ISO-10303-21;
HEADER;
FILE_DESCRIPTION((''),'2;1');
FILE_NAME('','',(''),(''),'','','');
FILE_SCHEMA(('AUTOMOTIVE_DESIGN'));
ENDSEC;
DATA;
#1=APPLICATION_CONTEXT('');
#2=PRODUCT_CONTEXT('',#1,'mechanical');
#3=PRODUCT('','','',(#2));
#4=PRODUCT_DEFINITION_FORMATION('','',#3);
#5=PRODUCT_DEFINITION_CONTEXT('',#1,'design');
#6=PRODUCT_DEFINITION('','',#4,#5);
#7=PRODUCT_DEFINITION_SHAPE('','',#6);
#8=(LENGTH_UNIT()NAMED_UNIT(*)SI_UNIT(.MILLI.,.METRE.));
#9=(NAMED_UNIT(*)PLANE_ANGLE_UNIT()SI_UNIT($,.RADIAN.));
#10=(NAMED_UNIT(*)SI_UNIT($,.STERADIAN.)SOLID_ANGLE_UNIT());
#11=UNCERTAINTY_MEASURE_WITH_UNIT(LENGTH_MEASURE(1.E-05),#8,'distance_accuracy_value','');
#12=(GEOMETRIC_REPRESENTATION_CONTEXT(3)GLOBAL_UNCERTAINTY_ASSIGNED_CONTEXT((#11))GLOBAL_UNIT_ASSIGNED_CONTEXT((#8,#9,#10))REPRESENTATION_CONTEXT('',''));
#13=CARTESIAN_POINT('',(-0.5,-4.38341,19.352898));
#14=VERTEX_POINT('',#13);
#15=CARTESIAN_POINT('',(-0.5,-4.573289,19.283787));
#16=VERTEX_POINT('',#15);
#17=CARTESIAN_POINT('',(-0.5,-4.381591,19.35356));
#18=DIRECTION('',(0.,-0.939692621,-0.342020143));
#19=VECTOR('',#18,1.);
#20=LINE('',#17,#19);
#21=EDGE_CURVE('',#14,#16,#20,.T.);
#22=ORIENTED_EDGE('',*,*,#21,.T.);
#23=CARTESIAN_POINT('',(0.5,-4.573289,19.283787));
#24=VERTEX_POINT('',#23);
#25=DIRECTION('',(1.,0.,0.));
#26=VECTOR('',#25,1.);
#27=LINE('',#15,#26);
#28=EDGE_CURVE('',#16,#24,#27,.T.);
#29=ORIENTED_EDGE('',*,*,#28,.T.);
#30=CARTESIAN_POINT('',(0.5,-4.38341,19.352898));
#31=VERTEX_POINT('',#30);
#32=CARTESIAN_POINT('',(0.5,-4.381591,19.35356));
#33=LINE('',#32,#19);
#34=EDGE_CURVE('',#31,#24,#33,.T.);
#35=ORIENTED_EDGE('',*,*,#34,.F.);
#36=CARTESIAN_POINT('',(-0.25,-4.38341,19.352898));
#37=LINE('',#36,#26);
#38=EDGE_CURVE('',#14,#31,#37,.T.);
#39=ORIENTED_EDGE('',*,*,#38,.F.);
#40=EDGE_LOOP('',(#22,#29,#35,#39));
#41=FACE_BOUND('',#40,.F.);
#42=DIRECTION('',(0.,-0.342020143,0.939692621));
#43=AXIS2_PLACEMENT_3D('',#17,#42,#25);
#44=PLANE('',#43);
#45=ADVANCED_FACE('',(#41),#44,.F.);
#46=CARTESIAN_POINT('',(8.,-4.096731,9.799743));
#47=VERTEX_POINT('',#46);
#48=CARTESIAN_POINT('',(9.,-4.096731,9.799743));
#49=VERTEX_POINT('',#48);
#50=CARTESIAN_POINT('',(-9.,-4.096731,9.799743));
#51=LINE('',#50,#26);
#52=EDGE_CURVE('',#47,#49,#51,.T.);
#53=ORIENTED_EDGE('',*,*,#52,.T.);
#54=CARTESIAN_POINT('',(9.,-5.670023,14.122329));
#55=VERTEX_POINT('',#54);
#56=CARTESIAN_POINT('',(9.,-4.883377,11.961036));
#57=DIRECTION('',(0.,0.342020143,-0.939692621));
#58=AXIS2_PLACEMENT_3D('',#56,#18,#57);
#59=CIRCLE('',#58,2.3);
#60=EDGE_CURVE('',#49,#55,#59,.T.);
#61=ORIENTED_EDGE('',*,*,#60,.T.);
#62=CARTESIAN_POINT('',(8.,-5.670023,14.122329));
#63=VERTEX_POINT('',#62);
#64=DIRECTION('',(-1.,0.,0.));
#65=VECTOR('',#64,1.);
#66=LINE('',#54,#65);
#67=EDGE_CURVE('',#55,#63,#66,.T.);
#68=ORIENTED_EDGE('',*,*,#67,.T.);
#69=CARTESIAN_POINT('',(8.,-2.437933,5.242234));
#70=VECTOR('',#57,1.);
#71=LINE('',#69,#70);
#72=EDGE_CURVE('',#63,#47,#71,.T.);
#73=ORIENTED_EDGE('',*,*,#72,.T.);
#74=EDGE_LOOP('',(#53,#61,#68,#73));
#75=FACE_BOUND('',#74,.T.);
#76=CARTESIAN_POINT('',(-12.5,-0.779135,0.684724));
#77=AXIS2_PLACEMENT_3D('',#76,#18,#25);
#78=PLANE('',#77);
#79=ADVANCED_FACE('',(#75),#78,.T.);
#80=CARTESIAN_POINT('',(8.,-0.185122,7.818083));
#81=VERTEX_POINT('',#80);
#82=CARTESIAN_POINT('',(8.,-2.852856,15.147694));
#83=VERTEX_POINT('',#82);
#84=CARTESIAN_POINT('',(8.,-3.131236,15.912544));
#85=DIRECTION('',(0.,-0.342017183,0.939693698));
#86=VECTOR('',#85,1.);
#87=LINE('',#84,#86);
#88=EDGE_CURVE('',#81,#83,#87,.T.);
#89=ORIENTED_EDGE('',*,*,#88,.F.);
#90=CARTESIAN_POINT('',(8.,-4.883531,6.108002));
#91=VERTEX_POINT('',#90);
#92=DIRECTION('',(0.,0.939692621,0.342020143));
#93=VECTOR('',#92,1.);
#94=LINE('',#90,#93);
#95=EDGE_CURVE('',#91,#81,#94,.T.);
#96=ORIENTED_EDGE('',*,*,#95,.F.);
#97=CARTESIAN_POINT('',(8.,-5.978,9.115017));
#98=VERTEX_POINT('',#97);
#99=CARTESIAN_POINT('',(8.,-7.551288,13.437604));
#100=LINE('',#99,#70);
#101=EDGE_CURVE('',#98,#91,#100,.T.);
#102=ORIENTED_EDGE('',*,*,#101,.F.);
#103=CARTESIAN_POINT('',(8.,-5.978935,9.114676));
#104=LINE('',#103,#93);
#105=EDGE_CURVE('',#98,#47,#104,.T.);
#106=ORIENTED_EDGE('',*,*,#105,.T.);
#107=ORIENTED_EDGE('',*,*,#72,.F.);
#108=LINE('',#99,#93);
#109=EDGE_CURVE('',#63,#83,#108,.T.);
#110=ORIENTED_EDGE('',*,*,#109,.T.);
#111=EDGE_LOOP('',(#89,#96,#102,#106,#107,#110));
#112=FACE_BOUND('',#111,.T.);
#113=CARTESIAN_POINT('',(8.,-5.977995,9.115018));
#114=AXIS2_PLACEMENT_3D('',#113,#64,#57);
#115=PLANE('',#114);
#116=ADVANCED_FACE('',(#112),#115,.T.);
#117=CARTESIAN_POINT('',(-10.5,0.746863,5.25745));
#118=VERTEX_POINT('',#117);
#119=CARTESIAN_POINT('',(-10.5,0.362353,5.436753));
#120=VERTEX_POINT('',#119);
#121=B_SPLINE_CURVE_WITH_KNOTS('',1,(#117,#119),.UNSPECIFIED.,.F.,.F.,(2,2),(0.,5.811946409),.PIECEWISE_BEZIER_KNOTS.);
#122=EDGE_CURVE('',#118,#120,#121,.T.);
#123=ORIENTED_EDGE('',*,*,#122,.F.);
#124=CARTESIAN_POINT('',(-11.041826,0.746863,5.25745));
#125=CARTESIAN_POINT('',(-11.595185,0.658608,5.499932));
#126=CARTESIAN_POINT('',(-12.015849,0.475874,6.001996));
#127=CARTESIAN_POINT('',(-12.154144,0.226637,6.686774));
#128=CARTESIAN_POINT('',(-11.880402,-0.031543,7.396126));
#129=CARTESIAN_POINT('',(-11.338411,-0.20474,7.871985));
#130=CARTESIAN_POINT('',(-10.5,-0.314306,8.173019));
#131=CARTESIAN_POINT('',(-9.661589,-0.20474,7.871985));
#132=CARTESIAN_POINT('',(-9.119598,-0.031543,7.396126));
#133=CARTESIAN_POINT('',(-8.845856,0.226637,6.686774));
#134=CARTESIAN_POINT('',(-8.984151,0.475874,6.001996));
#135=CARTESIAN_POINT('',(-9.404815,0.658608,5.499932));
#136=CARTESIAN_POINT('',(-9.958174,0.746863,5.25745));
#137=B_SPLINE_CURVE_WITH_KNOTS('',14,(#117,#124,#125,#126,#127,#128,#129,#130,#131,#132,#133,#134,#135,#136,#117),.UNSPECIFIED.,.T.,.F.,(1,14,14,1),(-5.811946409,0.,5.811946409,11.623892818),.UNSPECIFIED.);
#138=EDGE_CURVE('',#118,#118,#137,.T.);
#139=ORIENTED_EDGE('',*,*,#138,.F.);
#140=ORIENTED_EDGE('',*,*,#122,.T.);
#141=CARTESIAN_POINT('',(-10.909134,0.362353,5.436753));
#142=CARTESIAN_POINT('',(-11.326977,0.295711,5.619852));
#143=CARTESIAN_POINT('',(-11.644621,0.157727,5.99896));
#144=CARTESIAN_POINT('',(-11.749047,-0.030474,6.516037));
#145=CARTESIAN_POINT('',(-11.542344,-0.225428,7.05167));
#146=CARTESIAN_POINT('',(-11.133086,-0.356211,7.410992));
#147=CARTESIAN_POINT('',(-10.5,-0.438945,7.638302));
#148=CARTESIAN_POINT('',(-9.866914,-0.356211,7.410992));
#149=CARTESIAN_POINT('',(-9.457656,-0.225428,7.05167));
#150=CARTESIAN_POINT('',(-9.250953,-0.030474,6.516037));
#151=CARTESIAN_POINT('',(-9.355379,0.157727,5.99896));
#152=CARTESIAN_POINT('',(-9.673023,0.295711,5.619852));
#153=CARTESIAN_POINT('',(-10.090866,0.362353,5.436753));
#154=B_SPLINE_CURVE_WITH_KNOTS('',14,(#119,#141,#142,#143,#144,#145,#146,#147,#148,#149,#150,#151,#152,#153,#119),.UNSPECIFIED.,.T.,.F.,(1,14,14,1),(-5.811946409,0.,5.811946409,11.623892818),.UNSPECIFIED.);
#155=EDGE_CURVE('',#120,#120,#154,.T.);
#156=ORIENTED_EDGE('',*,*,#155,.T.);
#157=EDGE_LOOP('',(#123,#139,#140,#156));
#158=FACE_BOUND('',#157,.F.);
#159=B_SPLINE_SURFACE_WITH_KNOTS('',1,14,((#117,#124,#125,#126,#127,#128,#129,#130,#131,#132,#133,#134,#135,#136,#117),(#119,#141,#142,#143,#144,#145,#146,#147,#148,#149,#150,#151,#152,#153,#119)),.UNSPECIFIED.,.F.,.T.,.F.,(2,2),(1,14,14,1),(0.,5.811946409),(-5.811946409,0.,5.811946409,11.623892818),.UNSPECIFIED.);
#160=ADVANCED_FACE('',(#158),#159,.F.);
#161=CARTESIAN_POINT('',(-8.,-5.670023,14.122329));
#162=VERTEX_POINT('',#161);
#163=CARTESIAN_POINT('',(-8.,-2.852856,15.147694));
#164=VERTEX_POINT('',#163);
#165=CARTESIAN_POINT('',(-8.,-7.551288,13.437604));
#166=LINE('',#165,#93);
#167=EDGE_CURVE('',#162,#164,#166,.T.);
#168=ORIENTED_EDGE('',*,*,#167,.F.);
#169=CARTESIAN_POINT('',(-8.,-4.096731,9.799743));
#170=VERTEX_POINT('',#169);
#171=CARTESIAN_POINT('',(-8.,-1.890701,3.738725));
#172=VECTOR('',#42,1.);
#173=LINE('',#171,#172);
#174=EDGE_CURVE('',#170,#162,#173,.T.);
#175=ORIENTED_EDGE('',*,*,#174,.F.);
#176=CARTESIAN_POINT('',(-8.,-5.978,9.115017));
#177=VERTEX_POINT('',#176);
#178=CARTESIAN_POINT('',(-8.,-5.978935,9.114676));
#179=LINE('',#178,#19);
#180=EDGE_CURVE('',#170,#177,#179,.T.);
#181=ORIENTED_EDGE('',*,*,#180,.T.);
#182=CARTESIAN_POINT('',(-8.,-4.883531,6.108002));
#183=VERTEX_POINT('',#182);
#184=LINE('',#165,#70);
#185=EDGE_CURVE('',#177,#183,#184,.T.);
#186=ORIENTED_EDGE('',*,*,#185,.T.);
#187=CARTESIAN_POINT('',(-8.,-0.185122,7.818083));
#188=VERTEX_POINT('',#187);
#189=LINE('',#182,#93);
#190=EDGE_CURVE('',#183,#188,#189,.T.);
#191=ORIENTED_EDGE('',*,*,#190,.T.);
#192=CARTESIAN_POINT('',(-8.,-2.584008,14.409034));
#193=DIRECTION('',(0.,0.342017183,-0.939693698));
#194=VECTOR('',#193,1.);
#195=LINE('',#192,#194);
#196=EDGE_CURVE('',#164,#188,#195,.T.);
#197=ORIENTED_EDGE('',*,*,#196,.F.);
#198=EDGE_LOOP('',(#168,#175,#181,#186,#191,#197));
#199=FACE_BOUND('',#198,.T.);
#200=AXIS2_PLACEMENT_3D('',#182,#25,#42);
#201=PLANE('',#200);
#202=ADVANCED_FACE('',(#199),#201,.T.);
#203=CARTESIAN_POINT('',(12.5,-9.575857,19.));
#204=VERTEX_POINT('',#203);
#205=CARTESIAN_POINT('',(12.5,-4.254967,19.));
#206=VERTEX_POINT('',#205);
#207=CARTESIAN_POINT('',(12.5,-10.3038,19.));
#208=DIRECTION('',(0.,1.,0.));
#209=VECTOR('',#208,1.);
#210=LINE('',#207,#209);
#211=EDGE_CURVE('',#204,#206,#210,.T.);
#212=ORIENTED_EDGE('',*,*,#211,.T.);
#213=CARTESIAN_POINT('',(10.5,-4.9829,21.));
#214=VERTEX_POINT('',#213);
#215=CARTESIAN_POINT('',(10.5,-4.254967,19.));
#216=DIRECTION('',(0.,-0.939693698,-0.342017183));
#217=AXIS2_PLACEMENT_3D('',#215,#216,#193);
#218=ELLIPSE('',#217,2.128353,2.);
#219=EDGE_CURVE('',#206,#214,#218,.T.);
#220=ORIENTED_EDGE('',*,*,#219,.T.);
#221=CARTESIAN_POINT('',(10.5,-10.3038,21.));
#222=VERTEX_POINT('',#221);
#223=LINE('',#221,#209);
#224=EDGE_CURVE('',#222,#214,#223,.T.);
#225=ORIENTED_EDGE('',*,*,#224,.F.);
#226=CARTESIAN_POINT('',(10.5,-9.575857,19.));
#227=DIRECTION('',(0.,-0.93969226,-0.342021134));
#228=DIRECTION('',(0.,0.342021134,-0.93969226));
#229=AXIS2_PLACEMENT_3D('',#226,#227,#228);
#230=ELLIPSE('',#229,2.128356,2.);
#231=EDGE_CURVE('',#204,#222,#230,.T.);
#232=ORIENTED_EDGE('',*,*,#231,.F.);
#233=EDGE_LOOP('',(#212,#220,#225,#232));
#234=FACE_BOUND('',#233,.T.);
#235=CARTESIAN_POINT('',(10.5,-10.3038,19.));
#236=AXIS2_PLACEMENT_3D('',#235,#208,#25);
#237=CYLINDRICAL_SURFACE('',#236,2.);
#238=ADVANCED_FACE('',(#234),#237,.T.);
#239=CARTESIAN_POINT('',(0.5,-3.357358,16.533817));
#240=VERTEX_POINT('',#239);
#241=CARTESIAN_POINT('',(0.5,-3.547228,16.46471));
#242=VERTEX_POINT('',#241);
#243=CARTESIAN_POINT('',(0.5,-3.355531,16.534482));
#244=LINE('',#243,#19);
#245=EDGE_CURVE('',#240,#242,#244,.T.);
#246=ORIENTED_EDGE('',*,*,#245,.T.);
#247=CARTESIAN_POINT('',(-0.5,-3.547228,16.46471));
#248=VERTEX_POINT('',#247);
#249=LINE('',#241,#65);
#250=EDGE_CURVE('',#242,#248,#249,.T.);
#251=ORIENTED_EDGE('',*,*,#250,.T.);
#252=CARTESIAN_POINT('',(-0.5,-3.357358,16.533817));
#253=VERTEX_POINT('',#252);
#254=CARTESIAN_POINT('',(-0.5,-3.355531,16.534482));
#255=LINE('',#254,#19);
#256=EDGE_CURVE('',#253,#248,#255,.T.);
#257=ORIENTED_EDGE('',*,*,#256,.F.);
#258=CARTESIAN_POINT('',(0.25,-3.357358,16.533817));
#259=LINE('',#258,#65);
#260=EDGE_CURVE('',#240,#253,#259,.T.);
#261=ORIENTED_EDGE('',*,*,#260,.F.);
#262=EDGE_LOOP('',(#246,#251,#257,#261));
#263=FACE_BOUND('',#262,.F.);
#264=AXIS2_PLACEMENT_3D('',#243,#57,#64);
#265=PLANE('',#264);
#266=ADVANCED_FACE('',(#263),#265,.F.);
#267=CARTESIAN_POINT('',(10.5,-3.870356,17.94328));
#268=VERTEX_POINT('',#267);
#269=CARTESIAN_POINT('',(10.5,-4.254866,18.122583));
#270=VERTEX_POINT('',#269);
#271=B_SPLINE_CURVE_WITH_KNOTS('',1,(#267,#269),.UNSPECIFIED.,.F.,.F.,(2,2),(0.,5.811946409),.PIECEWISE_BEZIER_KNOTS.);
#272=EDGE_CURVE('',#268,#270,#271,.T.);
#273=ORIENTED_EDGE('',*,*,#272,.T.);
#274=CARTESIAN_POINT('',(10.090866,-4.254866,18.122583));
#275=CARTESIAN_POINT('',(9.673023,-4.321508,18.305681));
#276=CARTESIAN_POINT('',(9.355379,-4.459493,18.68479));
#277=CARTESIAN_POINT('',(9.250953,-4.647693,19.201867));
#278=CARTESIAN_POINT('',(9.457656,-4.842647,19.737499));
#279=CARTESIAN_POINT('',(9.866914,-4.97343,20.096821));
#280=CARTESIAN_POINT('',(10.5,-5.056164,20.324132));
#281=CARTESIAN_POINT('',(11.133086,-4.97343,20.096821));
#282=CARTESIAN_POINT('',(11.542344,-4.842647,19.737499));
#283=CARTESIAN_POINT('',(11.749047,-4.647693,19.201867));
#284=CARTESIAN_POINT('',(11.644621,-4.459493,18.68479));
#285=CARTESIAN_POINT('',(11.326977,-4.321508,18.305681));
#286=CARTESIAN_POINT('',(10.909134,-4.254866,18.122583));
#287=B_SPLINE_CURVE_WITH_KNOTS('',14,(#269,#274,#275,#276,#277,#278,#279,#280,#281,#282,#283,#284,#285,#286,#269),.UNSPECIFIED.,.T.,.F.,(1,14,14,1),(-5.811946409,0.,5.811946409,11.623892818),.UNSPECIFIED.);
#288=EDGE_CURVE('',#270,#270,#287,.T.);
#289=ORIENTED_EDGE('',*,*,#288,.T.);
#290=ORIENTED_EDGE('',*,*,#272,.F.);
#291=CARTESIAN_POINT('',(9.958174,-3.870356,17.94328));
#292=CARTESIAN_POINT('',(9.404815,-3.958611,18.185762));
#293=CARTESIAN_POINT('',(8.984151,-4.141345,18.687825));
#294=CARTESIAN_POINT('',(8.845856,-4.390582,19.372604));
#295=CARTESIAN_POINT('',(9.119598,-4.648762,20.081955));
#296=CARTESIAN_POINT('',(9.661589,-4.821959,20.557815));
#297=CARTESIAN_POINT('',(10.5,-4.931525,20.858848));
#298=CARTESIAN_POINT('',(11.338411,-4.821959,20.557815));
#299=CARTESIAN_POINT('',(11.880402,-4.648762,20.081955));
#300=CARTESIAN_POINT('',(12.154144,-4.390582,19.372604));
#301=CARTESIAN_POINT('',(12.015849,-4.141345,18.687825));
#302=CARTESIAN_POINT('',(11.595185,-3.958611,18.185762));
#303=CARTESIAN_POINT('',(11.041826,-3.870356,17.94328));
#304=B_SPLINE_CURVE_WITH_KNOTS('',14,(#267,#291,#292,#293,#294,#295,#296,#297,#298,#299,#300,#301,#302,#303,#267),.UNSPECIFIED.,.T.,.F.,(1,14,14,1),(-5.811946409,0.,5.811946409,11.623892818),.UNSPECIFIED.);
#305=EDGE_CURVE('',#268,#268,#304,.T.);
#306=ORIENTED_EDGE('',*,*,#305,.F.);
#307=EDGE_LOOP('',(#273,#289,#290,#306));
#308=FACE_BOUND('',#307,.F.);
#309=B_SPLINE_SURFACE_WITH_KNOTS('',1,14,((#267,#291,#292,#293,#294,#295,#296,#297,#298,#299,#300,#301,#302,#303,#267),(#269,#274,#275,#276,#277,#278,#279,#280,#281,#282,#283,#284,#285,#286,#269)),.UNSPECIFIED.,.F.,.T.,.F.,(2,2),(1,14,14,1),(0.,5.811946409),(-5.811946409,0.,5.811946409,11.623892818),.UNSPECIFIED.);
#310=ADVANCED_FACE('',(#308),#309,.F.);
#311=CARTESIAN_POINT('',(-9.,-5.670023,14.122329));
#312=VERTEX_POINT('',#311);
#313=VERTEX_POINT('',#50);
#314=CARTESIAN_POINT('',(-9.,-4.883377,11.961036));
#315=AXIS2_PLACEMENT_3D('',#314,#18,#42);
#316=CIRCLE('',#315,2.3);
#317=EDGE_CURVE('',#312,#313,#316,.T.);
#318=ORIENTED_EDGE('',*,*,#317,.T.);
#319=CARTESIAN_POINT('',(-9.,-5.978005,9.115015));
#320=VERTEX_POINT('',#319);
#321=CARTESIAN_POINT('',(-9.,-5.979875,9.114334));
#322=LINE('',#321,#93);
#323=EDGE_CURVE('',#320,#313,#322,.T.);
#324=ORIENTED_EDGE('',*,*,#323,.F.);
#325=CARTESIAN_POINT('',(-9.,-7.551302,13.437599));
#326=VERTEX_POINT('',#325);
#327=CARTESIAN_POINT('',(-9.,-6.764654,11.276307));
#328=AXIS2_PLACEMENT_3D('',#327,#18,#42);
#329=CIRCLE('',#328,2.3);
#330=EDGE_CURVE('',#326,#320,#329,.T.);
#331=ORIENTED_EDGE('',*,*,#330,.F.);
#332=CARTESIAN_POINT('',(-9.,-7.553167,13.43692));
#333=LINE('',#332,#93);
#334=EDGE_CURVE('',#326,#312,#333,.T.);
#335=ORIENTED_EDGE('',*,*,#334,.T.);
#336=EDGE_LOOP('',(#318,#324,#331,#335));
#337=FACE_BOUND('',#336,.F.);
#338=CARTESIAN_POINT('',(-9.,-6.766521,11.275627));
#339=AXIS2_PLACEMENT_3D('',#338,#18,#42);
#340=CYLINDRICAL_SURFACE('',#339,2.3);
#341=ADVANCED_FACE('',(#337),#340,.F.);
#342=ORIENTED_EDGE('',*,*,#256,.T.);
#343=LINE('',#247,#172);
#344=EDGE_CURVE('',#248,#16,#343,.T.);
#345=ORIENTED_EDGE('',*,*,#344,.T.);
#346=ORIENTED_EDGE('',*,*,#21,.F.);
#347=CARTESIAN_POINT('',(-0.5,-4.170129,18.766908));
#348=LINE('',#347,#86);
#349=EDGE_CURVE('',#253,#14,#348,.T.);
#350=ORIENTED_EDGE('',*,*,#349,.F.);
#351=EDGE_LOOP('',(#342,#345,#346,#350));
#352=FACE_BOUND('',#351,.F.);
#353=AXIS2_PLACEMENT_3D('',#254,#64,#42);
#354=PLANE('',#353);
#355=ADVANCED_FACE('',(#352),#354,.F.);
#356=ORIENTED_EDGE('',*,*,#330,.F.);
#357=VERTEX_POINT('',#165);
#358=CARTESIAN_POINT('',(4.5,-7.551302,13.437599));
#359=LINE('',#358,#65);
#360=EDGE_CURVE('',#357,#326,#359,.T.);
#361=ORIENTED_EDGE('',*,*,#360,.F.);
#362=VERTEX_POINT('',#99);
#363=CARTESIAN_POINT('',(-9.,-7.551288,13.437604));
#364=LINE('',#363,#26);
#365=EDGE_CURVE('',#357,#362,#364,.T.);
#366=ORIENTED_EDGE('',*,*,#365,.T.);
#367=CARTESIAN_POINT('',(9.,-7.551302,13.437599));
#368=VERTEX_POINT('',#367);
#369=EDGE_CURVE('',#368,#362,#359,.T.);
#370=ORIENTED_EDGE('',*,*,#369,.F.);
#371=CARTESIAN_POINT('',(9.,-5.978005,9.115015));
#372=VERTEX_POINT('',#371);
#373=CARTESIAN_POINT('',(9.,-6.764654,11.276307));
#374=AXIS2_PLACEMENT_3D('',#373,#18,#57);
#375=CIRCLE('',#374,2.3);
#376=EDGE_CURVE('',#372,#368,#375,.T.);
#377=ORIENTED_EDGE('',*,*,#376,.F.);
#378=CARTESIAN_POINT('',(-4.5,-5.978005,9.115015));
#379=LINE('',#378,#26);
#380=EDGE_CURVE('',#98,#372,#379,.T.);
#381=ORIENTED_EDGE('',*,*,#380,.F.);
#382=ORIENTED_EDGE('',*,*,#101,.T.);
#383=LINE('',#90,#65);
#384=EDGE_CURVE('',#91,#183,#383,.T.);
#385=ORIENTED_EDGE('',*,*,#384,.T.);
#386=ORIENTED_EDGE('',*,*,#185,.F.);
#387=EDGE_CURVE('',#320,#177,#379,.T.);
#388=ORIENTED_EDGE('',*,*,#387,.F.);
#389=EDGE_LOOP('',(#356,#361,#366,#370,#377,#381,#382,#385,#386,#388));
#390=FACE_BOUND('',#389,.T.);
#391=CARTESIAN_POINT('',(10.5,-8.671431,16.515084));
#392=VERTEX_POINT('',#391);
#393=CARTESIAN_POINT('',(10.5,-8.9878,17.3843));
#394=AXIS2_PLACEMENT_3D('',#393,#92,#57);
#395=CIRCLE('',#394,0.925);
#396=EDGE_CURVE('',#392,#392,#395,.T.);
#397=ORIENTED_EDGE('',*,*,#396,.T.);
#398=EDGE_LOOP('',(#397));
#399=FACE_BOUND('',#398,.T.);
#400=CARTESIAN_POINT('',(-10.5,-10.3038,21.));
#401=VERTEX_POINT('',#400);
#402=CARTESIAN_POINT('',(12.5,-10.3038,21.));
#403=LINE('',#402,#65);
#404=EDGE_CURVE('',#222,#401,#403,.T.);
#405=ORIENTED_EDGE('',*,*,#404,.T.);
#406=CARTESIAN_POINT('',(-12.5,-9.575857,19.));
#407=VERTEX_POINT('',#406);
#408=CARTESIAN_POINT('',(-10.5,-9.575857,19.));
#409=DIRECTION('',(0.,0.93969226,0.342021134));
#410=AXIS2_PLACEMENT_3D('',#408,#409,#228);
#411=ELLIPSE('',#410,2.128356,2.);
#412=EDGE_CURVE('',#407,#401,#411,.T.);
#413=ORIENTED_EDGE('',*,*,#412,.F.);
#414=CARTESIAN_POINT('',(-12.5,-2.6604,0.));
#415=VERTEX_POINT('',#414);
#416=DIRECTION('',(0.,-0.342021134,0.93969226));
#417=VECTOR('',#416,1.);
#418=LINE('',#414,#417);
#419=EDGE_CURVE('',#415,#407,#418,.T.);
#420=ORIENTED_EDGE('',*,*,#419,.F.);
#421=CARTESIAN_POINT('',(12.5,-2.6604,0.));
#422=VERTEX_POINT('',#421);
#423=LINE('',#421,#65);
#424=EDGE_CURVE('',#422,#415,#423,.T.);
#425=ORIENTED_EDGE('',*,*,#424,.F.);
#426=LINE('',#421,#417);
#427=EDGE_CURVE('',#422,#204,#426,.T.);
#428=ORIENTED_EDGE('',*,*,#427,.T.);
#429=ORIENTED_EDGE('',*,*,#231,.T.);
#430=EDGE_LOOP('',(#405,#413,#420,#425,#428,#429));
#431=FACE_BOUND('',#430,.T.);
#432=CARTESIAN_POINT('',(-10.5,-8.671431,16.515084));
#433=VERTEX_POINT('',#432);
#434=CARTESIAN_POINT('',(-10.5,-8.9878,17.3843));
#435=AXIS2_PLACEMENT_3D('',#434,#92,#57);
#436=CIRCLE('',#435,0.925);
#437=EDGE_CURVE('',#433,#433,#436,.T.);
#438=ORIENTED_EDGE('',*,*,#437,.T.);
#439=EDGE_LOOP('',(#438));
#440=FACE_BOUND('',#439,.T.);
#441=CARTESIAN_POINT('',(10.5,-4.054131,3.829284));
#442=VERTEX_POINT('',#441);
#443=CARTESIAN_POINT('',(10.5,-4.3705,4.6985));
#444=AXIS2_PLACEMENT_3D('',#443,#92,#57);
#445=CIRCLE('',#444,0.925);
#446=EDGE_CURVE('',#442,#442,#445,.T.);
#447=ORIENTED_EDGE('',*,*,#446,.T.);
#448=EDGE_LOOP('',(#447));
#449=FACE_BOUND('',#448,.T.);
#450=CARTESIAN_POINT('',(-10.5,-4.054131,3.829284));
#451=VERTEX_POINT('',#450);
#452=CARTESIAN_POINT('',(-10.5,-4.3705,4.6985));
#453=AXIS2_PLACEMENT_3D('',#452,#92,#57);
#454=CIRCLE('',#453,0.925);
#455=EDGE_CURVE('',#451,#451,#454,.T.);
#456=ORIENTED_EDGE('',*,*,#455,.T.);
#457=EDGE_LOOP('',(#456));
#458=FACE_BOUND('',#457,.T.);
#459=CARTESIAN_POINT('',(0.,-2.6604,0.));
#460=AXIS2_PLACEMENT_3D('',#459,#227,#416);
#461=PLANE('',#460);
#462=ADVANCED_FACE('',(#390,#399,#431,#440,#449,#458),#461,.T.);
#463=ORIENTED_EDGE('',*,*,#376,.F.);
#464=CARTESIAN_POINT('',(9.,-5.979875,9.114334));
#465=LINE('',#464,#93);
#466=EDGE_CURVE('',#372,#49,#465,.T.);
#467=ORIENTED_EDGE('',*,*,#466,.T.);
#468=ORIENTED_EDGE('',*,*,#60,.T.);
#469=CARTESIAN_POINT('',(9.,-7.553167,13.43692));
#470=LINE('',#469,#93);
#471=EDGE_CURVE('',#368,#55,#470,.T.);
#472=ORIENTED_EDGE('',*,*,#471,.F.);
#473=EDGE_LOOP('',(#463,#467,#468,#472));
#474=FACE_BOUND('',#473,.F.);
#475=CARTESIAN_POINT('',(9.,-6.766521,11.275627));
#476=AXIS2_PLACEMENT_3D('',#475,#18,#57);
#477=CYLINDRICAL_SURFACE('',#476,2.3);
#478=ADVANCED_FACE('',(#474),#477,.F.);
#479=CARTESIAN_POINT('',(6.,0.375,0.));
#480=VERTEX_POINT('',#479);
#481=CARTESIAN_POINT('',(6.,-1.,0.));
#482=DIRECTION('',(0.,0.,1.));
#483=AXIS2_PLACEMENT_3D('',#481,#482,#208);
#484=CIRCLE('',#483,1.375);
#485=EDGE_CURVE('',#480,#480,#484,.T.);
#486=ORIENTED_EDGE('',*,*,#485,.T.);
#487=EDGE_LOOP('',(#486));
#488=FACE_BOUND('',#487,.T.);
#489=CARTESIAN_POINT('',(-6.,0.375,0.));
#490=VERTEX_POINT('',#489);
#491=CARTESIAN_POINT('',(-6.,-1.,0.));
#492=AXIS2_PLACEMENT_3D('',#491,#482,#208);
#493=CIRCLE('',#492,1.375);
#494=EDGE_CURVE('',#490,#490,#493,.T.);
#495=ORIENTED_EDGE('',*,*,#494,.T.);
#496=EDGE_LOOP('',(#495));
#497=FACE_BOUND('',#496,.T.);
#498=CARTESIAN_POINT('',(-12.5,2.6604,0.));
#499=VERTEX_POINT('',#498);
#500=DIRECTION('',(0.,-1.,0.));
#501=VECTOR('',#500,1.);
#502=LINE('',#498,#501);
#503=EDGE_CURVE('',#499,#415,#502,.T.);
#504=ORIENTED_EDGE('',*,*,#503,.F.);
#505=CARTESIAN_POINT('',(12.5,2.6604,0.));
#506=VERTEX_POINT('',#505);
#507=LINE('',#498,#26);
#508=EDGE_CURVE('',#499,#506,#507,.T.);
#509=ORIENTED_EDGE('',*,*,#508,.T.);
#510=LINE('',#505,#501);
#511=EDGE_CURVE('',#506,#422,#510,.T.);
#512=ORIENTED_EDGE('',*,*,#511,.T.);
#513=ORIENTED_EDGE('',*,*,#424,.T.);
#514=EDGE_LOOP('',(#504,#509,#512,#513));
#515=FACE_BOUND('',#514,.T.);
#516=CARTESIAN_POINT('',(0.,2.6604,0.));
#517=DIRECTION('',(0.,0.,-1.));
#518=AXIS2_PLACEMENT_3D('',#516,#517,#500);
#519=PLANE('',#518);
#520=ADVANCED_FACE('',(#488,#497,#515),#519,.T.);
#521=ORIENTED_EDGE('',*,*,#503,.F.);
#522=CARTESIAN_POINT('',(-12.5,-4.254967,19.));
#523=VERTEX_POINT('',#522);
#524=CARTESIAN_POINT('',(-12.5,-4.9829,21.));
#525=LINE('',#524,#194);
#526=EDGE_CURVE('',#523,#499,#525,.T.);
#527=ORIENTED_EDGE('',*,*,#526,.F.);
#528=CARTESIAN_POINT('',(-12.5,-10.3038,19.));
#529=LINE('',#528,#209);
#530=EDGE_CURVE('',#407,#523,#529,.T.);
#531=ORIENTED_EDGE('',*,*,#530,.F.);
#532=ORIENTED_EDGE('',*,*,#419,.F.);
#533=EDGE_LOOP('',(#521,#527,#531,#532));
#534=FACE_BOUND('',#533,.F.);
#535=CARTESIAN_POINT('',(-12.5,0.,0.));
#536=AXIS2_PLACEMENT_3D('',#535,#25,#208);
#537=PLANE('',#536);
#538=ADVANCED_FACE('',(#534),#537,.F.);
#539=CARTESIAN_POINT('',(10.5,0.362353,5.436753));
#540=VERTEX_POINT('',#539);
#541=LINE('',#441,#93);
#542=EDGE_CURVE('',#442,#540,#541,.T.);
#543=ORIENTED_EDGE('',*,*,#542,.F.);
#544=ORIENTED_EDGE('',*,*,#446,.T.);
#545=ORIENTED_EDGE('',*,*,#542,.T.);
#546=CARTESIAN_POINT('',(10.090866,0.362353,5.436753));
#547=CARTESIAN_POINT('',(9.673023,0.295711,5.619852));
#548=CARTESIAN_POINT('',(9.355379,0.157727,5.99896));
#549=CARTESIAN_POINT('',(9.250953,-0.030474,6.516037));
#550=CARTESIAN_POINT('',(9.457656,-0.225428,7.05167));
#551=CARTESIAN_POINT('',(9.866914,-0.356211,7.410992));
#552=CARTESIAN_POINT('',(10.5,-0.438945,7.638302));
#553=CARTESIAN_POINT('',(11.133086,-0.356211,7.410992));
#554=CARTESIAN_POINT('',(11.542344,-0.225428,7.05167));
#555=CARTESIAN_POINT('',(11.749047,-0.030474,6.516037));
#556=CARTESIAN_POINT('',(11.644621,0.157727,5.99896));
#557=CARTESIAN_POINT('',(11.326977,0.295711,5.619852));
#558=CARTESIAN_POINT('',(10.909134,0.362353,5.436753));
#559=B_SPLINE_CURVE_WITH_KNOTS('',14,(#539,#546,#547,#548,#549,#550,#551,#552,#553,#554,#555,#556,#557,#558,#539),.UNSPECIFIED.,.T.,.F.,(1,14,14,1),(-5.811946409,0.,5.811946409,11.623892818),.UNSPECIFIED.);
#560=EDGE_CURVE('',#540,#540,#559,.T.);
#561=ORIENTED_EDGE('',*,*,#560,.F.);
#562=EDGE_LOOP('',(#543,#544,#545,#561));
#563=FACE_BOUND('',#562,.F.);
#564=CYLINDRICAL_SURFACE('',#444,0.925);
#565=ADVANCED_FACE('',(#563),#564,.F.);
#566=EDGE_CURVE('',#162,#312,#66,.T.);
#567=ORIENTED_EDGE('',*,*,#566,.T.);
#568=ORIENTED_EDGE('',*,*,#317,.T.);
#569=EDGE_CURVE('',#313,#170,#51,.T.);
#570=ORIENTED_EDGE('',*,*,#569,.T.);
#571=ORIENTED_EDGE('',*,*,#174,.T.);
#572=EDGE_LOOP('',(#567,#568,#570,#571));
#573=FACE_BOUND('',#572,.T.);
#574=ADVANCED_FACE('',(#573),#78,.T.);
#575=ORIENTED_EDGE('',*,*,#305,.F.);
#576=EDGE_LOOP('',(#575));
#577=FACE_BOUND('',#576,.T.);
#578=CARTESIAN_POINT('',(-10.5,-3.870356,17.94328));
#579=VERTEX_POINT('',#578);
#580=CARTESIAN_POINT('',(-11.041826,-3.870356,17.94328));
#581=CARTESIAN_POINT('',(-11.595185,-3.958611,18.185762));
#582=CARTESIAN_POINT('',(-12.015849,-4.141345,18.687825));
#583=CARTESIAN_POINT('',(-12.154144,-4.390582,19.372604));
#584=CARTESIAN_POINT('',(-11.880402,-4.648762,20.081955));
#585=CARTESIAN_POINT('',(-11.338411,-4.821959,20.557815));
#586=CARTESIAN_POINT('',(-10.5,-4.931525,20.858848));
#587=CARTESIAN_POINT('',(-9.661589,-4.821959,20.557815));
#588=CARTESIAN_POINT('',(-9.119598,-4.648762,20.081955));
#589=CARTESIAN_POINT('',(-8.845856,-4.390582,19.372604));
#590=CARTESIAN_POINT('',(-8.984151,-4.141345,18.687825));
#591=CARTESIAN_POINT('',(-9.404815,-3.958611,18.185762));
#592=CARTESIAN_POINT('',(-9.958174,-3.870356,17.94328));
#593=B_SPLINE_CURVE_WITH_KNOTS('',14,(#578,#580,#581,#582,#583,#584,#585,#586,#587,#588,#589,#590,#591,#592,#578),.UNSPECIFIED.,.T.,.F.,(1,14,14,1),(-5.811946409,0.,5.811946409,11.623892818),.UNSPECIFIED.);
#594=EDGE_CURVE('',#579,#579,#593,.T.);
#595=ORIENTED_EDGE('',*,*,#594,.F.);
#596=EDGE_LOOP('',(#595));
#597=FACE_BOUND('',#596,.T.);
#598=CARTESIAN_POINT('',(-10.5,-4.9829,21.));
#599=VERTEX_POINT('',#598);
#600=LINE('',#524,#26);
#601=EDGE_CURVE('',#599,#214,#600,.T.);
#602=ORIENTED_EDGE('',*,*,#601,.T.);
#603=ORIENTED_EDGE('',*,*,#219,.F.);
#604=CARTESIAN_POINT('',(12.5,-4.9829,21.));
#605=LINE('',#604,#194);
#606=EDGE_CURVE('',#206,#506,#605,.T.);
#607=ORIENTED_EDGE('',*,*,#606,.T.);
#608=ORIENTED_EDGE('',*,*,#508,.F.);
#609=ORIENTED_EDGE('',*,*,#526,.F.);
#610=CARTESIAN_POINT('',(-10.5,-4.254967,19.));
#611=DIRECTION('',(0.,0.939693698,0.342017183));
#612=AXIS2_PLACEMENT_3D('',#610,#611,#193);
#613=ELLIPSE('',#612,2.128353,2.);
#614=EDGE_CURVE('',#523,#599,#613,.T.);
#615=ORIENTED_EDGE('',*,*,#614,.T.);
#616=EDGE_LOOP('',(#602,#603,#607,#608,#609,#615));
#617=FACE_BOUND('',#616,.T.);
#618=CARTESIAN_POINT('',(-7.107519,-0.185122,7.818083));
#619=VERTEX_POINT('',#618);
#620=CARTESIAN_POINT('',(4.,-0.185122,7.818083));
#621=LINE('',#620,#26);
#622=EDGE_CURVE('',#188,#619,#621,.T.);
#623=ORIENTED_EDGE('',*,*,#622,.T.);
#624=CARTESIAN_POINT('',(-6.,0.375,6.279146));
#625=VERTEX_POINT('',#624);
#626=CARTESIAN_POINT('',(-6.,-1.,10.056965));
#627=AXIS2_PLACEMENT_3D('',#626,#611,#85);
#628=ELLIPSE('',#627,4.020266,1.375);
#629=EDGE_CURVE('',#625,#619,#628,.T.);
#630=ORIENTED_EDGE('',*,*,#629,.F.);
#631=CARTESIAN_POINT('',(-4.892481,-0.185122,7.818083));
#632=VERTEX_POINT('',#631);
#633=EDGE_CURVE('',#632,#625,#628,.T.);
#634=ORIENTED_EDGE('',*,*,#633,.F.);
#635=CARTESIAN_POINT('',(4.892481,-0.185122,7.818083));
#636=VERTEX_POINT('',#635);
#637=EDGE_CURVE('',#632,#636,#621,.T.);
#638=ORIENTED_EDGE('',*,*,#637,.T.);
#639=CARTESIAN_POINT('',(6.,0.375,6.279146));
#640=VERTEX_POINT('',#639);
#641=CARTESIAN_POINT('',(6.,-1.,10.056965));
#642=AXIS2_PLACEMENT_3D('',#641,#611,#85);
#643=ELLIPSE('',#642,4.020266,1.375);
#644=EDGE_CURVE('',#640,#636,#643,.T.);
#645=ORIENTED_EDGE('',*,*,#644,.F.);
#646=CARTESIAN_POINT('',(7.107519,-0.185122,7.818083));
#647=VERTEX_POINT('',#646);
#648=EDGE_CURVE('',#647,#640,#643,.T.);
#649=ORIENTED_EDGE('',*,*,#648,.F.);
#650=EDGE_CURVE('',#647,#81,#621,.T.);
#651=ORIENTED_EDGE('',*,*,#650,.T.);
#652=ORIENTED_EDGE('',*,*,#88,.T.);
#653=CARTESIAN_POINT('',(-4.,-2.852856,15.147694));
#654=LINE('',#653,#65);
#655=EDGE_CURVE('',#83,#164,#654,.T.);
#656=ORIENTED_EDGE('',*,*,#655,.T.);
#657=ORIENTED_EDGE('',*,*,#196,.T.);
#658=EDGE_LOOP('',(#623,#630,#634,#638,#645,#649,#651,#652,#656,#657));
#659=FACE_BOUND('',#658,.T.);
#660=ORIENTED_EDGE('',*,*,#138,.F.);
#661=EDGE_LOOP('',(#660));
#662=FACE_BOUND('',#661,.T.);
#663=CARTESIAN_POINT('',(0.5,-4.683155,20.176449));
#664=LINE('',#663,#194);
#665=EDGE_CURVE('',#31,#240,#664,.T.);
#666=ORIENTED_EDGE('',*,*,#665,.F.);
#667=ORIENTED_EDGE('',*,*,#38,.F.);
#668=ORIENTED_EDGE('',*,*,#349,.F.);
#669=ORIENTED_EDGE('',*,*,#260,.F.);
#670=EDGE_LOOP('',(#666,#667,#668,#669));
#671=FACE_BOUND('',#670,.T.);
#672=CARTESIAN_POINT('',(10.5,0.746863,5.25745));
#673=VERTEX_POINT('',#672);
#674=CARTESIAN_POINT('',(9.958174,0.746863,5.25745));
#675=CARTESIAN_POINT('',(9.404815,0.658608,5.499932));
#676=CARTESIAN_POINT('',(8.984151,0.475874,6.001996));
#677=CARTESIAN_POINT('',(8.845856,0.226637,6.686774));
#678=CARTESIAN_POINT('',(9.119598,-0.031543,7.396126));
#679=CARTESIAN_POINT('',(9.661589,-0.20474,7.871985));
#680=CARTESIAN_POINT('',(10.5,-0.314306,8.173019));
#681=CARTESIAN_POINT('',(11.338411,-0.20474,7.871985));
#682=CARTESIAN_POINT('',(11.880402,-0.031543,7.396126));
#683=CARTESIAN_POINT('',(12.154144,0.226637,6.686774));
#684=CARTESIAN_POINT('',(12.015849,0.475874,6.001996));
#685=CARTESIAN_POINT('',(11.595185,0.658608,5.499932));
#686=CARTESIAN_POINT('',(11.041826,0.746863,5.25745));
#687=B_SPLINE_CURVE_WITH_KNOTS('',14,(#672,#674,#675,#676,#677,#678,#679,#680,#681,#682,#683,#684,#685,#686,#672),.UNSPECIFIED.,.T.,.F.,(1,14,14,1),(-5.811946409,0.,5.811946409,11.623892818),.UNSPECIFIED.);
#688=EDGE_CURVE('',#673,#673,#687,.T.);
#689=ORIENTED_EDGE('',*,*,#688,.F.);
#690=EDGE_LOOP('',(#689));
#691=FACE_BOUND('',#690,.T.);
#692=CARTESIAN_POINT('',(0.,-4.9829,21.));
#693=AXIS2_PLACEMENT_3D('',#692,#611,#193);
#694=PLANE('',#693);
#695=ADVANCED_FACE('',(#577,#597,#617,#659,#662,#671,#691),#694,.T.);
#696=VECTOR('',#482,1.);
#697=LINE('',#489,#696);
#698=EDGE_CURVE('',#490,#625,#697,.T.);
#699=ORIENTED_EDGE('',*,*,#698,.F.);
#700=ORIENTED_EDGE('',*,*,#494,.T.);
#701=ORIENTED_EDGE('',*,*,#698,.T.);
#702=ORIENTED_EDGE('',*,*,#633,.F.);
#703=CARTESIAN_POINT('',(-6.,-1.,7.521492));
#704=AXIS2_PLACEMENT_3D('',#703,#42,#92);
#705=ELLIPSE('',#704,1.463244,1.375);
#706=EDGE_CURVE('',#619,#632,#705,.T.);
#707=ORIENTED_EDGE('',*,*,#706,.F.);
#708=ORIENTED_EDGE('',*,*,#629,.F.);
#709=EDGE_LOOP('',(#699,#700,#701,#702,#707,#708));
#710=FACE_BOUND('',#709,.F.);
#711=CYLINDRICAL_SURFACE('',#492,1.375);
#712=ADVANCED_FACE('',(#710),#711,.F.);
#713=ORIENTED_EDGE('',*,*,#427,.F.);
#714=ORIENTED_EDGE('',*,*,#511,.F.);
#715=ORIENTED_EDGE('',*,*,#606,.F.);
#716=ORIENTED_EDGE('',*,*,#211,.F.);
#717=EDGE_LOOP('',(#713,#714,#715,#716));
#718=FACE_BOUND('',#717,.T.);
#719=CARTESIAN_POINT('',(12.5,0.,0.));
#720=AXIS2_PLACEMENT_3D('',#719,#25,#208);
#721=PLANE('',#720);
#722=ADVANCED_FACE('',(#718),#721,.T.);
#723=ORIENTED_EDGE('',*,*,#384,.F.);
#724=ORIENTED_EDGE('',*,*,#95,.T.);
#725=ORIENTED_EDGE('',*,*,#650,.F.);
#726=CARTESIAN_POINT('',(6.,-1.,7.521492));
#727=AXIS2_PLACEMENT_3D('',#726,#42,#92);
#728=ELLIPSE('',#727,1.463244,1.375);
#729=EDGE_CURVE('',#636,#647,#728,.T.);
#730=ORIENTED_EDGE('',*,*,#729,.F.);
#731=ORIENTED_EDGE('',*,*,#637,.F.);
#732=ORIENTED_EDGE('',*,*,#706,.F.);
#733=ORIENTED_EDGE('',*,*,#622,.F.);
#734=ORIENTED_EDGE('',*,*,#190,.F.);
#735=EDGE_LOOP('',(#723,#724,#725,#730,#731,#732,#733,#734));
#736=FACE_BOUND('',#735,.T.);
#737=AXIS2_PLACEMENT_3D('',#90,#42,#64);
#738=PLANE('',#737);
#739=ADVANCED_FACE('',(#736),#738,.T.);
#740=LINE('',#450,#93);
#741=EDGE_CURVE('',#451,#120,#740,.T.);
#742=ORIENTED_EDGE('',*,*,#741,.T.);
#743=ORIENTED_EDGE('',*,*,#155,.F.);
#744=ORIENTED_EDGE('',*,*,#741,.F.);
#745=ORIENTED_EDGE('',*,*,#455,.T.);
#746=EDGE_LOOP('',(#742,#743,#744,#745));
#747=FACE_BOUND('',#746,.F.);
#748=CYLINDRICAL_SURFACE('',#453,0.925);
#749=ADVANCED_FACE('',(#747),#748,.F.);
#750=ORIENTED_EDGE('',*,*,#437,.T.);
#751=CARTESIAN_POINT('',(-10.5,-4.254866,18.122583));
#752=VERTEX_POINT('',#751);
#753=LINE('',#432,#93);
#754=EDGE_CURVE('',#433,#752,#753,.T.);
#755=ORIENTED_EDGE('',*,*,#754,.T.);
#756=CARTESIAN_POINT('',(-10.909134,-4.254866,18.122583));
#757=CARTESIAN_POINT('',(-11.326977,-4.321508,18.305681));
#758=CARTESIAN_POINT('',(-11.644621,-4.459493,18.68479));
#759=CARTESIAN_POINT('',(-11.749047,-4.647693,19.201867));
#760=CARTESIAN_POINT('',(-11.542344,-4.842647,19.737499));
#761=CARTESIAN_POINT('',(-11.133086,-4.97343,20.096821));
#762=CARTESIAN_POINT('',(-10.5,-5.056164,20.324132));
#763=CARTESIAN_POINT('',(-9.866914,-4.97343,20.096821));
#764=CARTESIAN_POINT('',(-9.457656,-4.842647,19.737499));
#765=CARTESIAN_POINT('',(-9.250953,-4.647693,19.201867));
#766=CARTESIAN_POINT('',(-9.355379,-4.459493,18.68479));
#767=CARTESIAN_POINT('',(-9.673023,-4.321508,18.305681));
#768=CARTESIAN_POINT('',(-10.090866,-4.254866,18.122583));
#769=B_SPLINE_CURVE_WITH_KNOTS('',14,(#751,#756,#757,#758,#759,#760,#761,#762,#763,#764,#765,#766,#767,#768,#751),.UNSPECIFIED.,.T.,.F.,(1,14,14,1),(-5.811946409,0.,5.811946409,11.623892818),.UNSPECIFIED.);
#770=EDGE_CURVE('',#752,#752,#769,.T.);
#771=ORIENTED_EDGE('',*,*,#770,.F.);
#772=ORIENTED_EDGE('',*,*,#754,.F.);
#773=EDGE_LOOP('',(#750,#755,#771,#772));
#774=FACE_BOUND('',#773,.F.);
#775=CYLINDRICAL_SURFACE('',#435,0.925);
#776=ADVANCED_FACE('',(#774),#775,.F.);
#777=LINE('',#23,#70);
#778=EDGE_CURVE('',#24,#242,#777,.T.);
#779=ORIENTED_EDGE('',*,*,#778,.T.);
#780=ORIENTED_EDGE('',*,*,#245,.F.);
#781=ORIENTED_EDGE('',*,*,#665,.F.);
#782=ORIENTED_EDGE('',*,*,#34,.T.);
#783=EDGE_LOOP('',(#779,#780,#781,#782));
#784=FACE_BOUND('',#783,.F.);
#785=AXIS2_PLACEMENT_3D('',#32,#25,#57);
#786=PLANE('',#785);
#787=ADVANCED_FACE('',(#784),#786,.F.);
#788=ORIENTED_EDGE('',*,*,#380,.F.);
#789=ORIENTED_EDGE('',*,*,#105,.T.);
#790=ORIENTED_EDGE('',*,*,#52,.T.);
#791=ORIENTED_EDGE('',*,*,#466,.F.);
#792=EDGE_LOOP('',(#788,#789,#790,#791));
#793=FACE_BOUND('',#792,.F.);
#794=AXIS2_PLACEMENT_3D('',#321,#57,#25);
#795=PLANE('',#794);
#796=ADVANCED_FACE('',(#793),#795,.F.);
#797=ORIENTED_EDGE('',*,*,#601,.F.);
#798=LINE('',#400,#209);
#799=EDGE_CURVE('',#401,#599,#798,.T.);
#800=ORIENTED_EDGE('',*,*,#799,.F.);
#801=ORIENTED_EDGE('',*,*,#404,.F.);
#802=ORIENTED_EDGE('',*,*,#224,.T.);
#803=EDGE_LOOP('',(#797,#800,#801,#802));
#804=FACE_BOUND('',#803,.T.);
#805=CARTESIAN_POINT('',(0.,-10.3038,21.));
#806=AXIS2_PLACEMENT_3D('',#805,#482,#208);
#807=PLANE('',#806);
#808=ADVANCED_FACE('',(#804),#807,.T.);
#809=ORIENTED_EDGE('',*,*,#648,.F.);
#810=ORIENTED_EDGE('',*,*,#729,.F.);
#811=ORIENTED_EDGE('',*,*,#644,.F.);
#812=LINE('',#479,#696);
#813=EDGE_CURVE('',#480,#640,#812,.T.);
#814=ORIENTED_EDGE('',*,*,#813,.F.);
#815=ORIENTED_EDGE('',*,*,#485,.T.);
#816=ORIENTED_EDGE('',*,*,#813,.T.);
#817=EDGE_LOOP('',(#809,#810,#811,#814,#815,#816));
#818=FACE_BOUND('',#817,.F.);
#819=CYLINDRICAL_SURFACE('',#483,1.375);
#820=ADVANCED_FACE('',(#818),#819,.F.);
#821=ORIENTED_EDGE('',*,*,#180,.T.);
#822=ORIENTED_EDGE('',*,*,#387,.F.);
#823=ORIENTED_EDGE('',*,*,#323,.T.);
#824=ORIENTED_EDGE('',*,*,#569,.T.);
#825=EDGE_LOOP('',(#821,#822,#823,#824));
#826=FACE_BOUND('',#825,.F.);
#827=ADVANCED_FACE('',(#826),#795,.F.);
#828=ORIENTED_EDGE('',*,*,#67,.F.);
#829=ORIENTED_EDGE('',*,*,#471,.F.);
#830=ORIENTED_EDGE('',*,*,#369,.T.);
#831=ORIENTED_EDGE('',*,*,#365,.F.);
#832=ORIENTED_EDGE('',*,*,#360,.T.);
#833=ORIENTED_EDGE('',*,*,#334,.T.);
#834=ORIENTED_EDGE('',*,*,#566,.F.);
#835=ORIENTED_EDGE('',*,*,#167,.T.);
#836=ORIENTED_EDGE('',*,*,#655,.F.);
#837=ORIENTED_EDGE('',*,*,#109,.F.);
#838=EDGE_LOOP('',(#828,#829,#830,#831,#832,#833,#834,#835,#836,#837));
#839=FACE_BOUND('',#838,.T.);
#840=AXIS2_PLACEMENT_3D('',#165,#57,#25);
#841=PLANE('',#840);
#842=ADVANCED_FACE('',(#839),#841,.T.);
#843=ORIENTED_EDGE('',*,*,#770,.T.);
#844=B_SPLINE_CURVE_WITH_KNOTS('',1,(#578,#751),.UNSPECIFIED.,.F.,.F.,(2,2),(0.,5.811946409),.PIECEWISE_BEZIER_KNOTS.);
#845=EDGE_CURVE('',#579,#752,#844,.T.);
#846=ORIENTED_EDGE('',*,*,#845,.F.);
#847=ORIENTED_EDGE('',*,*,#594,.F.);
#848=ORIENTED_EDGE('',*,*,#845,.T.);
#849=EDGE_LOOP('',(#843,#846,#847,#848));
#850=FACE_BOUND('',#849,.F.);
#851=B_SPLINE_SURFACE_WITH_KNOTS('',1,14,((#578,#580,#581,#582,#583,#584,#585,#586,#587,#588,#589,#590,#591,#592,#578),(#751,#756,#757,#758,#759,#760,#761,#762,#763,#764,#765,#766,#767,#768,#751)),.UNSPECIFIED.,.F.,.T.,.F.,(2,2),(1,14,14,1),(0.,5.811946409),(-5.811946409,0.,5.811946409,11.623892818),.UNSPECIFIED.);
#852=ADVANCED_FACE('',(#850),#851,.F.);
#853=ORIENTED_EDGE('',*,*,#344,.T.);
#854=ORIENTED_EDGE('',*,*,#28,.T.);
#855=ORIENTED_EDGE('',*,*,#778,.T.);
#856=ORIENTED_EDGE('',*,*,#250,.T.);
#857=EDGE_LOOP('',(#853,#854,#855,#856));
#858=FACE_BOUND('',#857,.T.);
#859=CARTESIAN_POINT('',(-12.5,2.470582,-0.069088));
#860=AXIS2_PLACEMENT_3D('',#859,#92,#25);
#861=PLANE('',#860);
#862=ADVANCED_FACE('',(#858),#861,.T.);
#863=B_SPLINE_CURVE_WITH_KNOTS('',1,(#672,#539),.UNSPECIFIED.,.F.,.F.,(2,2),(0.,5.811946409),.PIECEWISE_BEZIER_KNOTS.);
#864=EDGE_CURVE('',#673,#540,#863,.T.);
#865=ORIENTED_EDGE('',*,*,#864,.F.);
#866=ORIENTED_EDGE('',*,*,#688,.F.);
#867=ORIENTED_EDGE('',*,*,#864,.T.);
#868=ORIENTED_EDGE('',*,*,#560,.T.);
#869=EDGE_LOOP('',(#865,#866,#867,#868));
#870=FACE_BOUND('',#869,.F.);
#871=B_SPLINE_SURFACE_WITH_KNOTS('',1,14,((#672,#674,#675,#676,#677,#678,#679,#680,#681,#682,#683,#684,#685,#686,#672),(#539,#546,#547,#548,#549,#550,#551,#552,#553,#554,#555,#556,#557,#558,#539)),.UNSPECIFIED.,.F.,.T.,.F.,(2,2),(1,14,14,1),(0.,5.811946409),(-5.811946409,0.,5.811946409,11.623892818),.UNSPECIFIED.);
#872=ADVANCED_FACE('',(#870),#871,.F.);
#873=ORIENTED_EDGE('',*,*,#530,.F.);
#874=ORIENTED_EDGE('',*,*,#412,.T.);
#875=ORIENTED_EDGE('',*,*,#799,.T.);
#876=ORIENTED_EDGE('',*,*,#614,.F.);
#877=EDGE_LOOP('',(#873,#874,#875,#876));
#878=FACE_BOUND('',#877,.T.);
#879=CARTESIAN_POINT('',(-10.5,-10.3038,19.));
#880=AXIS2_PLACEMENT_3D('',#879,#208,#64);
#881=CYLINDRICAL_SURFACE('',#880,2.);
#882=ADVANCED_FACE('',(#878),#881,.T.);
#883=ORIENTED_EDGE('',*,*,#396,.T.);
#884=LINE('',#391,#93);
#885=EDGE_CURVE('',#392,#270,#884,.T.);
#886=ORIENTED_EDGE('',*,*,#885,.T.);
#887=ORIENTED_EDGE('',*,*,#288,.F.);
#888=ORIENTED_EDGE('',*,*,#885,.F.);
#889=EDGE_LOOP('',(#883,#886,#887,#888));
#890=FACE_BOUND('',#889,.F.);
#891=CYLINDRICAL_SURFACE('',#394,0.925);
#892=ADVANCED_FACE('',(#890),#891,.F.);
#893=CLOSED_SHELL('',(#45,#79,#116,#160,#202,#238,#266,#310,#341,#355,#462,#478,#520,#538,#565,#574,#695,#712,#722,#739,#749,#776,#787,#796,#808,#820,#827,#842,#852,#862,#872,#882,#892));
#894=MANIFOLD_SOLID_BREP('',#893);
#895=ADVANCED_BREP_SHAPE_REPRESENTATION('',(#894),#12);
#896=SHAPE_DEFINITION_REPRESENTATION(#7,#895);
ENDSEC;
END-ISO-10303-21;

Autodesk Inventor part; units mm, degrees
ref_plane "YZ Plane" through (0, 0, 0) normal (1, 0, 0) x (0, 1, 0)
ref_plane "XZ Plane" through (0, 0, 0) normal (0, 1, 0) x (-1, 0, 0)
ref_plane "XY Plane" through (0, 0, 0) normal (0, 0, 1) x (1, 0, 0)
sketch "Skizze1" plane through (0, 0, 0) normal (1, 0, 0) x (0, 1, 0)
  line L0 (2.6604, 0) -> (-2.6604, 0)
  line L1 (-2.6604, 0) -> (-10.3038, 21)
  line L2 (-10.3038, 21) -> (-4.9829, 21)
  line L3 (-4.9829, 21) -> (2.6604, 0)
  point P0 (0, 0)
  point P1 (0, 0)
  dimension "d1" = 21
  dimension "d2" = 70
  dimension "d33" = 5
extrude "Extrusion1" add sketch "Skizze1" along normal mid plane 25
sketch "Skizze3" plane through (-12.5, -2.6604, 0) normal (0, -0.9396926, -0.3420201) x (1, 0, 0)
  line L0 (25, 0) -> (0, 0) projected
  line L1 (25, 22.3477) -> (25, 0) projected
  line L2 (25, 22.3477) -> (0, 22.3477) projected
  line L3 (0, 0) -> (0, 22.3477) projected
  line L4 (3.5, 12) -> (21.5, 12) construction
  line L5 (3.5, 9.7) -> (21.5, 9.7)
  line L6 (21.5, 14.3) -> (3.5, 14.3)
  arc A0 (3.5, 14.3) -> (3.5, 9.7) centre (3.5, 12) ccw
  arc A1 (21.5, 9.7) -> (21.5, 14.3) centre (21.5, 12) ccw
  line L7 (12.5, 22.3477) -> (12.5, 0) construction
  point P0 (12.5, -0.9099)
  point P1 (12.5, 12)
  dimension "d10" = 4.6
  dimension "d11" = 18
  dimension "d12" = 12
extrude "Extrusion3" cut sketch "Skizze3" against normal blind 2 contours A0 L6 A1 L5
sketch "Skizze4" plane through (-12.5, -2.6604, 0) normal (0, -0.9396926, -0.3420201) x (1, 0, 0)
  line L0 (2, 18.5) -> (23, 18.5) construction
  line L1 (23, 18.5) -> (23, 5) construction
  line L2 (23, 5) -> (2, 5) construction
  line L3 (2, 5) -> (2, 18.5) construction
  line L4 (3.5, 14.3) -> (21.5, 14.3) projected
  arc A0 (21.5, 9.7) -> (21.5, 14.3) centre (21.5, 12) ccw projected
  line L5 (21.5, 9.7) -> (3.5, 9.7) projected
  arc A1 (3.5, 14.3) -> (3.5, 9.7) centre (3.5, 12) ccw projected
  line L6 (25, 0) -> (0, 0) projected
  line L7 (25, 22.3477) -> (25, 0) projected
  line L8 (25, 22.3477) -> (0, 22.3477) projected
  line L9 (0, 0) -> (0, 22.3477) projected
  line L10 (25, 22.3477) -> (0, 22.3477) construction
  line L11 (12.5, 22.3477) -> (12.5, 0) construction
  line L12 (25, 0) -> (0, 0) construction
  point P0 (12.5, -0.9099)
  dimension "d15" = 21
  dimension "d16" = 13.5
  dimension "d34" = 7
hole "Bohrung1" at (-10.5, -8.9878, 17.3843) at (10.5, -8.9878, 17.3843) at (10.5, -4.3705, 4.6985) at (-10.5, -4.3705, 4.6985) direction (0, 0.9396926, 0.3420201) diameter 1.85 end through all
sketch "Skizze5" plane through (12.5, 2.6604, 0) normal (0, 0, -1) x (-1, 0, 0)
  line L0 (25, 0) -> (0, 0) projected
  line L1 (0, -5.3209) -> (0, 0) projected
  line L2 (0, -5.3209) -> (25, -5.3209) projected
  line L3 (25, 0) -> (25, -5.3209) projected
  line L4 (0, -5.3209) -> (0, 0) construction
  line L5 (25, 0) -> (25, -5.3209) construction
  line L6 (0, -3.6604) -> (25, -3.6604) construction
  line L7 (25, 0) -> (0, 0) construction
  line L8 (12.5, 0) -> (12.5, -5.3209) construction
  point P0 (12.5, -2.6604)
  point P1 (6.5, -3.6604)
  point P2 (18.5, -3.6604)
  dimension "d25" = 12
  dimension "d43" = 1
hole "Bohrung2" at (6, -1, 0) at (-6, -1, 0) direction (0, 0, 1) diameter 2.75 end through all
sketch "Skizze6" plane through (-12.5, -2.6604, 0) normal (0, -0.9396926, -0.3420201) x (1, 0, 0)
  line L0 (21.5, 9.7) -> (3.5, 9.7) projected
  arc A0 (21.5, 9.7) -> (21.5, 14.3) centre (21.5, 12) ccw projected
  line L1 (3.5, 14.3) -> (21.5, 14.3) projected
  arc A1 (3.5, 14.3) -> (3.5, 9.7) centre (3.5, 12) ccw projected
  line L2 (3.5, 14.3) -> (21.5, 14.3) projected
  line L3 (4.5, 14.3) -> (20.5, 14.3)
  line L4 (20.5, 14.3) -> (20.5, 6.5)
  line L5 (20.5, 6.5) -> (4.5, 6.5)
  line L6 (4.5, 6.5) -> (4.5, 14.3)
  line L7 (21.5, 9.7) -> (3.5, 9.7) construction
  line L8 (12.5, 9.7) -> (12.5, 14.3) construction
  point P0 (12.5, -0.9099)
  dimension "d35" = 16
  dimension "d36" = 7.8
extrude "Extrusion4" cut sketch "Skizze6" against normal through all contours L4 L5 L6 L0 | L0 L6 L1 L4
fillet "Rundung1" radius 2 2 edges at (-12.5, -7.6434, 21) (12.5, -7.6434, 21)
chamfer "Fase1" distance 0.3 angle 45 4 edges at (10.5, 0.0115, 7.2778) (10.5, -4.6057, 19.9636) (-10.5, -4.6057, 19.9636) (-10.5, 0.0115, 7.2778)
sketch "Skizze7" plane through (-12.5, 2.6604, 0) normal (0, 0.9396926, 0.3420201) x (1, 0, 0)
  circle A0 centre (2, -20.3199) radius 1.225 projected
  circle A1 centre (23, -6.8199) radius 1.225 projected
  ellipse E0 centre (23, -20.2194) end of major axis (23, -22.3477) minor radius 2 (23, -22.3477) -> (25, -20.2194) ccw projected
  line L0 (25, 0) -> (25, -20.2194) projected
  line L1 (0, 0) -> (25, 0) projected
  line L2 (0, -20.2194) -> (0, 0) projected
  ellipse E1 centre (2, -20.2194) end of major axis (2, -22.3477) minor radius 2 (0, -20.2194) -> (2, -22.3477) ccw projected
  line L3 (23, -22.3477) -> (2, -22.3477) projected
  line L4 (19.6075, -8.3199) -> (20.5, -8.3199) projected
  line L5 (20.5, -8.3199) -> (20.5, -16.1199) projected
  line L6 (20.5, -16.1199) -> (4.5, -16.1199) projected
  line L7 (4.5, -16.1199) -> (4.5, -8.3199) projected
  line L8 (4.5, -8.3199) -> (5.3925, -8.3199) projected
  ellipse E2 centre (6.5, -10.7024) end of major axis (6.5, -6.6822) minor radius 1.375 (7.6075, -8.3199) -> (5.3925, -8.3199) ccw projected
  line L9 (7.6075, -8.3199) -> (17.3925, -8.3199) projected
  ellipse E3 centre (18.5, -10.7024) end of major axis (18.5, -6.6822) minor radius 1.375 (19.6075, -8.3199) -> (17.3925, -8.3199) ccw projected
  circle A2 centre (23, -20.3199) radius 1.225 projected
  circle A3 centre (2, -6.8199) radius 1.225 projected
  line L10 (13, -17.5949) -> (12, -17.5949)
  line L11 (12, -17.5949) -> (12, -20.5949)
  line L12 (12, -20.5949) -> (13, -20.5949)
  line L13 (13, -20.5949) -> (13, -17.5949)
  line L14 (13, -17.5949) -> (12, -20.5949) construction
  line L15 (12, -17.5949) -> (13, -20.5949) construction
  point P0 (12.5, -0.9099)
  point P1 (12.5, -19.0949)
  dimension "d44" = 1
  dimension "d45" = 3
extrude "Extrusion5" cut sketch "Skizze7" against normal blind 0.2 contours L13 L12 L11 L10
properties part number "Kamerahalter Vorne geneigt"
